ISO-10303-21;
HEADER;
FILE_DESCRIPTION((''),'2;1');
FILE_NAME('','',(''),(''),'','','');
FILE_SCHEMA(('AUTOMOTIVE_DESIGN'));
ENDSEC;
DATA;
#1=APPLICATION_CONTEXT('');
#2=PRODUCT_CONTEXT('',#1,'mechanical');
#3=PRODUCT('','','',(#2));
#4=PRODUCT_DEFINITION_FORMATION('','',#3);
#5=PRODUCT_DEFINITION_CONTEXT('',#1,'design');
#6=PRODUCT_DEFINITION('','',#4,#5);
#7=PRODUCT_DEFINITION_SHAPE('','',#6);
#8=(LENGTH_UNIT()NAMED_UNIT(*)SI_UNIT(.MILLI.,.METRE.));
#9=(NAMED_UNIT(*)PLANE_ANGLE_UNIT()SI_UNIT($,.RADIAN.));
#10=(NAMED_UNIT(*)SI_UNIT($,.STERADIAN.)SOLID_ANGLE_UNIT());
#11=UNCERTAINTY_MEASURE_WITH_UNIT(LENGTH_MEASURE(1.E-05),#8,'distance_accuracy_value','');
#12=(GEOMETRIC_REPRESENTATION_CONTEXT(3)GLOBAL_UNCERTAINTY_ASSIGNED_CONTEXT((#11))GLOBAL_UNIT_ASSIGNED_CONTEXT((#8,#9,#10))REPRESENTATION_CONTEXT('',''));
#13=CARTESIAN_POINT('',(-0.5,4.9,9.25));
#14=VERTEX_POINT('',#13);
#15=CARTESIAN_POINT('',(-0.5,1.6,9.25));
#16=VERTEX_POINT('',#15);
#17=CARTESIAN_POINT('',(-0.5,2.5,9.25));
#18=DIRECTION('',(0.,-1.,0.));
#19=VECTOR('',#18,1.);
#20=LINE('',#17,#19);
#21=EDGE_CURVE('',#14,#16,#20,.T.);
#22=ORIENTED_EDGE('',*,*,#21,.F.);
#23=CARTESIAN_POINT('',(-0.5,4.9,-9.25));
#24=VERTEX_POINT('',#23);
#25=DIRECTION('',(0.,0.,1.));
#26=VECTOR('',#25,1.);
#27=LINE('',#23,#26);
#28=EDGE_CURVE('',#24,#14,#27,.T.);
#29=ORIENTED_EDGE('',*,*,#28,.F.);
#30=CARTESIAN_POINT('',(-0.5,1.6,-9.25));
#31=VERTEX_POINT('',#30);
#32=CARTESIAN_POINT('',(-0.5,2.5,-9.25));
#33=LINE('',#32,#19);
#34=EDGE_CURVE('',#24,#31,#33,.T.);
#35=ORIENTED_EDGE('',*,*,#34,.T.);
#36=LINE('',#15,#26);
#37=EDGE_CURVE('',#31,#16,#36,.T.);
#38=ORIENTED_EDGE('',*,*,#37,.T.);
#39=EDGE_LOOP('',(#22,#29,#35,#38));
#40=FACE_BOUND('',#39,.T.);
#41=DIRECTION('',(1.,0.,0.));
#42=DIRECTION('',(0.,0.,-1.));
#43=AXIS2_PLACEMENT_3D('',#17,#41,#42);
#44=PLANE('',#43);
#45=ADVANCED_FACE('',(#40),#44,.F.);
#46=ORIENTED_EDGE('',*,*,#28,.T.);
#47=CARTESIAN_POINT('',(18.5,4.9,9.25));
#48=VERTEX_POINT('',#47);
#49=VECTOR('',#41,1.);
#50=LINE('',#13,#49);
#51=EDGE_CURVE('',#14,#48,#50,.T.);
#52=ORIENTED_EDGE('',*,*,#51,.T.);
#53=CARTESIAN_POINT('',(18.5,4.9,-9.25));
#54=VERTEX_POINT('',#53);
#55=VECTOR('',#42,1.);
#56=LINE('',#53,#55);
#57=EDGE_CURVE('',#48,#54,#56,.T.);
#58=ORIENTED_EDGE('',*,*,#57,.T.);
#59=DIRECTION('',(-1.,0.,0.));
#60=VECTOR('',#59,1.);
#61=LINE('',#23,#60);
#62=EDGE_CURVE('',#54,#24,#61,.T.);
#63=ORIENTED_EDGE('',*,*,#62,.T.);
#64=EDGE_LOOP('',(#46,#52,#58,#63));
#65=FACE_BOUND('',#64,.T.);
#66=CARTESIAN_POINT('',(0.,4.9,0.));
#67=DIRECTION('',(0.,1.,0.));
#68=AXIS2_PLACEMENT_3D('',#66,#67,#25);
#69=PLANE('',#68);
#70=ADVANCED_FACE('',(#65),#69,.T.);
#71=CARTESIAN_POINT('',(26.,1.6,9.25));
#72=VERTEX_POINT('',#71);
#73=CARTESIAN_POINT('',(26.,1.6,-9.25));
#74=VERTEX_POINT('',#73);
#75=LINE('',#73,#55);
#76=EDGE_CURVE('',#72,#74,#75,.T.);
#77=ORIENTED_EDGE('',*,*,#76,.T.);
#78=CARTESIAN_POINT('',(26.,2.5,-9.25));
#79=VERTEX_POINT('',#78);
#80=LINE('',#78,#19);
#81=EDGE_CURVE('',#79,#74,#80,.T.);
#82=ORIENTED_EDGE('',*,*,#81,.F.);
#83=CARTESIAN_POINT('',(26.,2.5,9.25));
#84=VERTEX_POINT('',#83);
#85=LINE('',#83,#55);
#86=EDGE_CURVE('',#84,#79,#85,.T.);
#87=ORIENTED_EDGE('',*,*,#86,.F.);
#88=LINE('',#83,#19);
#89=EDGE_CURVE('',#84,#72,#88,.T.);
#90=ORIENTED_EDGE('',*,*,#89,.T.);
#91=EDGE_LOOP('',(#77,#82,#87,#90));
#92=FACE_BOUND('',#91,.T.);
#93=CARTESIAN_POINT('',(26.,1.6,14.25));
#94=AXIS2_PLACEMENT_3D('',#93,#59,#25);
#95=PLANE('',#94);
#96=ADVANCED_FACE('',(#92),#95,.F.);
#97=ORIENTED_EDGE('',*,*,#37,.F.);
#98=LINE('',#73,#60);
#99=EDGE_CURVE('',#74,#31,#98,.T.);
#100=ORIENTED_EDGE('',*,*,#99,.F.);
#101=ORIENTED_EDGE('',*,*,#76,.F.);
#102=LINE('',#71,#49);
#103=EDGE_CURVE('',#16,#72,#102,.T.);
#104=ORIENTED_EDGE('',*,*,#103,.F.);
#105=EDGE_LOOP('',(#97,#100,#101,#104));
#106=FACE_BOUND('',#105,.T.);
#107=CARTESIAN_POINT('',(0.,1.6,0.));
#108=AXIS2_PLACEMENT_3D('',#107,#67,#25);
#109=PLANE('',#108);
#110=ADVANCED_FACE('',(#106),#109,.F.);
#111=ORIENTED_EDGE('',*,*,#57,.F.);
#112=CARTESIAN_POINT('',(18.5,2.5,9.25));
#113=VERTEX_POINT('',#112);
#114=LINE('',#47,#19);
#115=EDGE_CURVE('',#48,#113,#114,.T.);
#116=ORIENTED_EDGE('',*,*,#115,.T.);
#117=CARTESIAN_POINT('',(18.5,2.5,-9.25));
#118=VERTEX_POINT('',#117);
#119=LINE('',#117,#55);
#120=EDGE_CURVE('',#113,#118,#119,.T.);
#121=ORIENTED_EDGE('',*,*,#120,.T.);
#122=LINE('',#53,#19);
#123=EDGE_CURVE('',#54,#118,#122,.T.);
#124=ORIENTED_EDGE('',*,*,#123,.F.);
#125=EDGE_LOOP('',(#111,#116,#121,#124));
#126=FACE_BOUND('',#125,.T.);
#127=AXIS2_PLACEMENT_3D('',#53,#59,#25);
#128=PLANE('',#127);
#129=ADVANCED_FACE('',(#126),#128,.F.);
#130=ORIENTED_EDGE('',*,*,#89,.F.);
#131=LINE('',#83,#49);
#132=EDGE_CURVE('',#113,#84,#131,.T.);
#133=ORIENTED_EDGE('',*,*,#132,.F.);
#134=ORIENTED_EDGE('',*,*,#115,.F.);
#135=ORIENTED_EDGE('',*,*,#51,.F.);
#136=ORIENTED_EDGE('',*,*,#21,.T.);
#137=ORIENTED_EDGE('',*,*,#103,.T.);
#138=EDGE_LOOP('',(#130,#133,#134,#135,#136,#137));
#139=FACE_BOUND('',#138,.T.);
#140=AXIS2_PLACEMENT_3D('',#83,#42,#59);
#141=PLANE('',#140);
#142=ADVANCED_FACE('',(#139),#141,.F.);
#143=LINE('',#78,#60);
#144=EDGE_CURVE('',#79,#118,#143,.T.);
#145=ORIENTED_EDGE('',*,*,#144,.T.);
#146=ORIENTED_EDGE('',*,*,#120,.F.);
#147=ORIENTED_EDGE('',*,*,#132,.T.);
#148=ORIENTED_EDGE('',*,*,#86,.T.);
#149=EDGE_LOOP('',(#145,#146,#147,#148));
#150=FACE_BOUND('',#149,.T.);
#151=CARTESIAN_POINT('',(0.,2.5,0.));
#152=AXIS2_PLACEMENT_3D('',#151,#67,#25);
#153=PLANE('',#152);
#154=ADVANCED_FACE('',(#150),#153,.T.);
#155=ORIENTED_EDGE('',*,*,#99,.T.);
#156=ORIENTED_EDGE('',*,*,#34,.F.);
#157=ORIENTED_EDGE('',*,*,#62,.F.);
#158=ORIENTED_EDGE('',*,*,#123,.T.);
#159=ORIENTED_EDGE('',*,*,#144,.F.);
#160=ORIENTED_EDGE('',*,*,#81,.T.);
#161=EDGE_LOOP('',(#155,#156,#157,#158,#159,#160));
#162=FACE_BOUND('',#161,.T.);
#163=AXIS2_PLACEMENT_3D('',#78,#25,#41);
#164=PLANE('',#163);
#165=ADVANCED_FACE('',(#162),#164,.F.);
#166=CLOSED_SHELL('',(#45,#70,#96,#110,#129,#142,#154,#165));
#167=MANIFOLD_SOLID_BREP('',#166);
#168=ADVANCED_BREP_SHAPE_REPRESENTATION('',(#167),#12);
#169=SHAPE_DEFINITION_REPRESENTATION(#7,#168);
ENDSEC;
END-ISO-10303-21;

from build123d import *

# Parameters (mm, degrees)
SKETCH1_W                  = 52
SKETCH1_H                  = 28.5
SKETCH1_R                  = 1.6
BOSS_EXTRUDE1_DEPTH        = 1.6
FILLET1_R                  = 2
SKETCH2_W                  = 6
SKETCH2_H                  = 8
BOSS_EXTRUDE2_DEPTH        = 2.6
SKETCH3_W                  = 26.5
SKETCH3_H                  = 18.5
BOSS_EXTRUDE3_DEPTH        = 0.9
SKETCH4_W                  = 19
SKETCH4_H                  = 18.5
BOSS_EXTRUDE4_DEPTH        = 2.4
SKETCH5_W                  = 4.480247742
SKETCH5_H                  = 2.767211841
SKETCH5_H_2                = 2.398250262
BOSS_EXTRUDE5_DEPTH        = 2
CUT_EXTRUDE1_START         = -1.6
CUT_EXTRUDE1_OUTLINE_R     = 1.6
CUT_EXTRUDE1_DEPTH         = 1.6
CUT_EXTRUDE1_2_OUTLINE_W   = 6
CUT_EXTRUDE1_2_OUTLINE_H   = 8
CUT_EXTRUDE1_2_OUTLINE_W_2 = 4.480247742
CUT_EXTRUDE1_2_OUTLINE_H_2 = 2.767211841
CUT_EXTRUDE1_2_OUTLINE_H_3 = 2.398250262
CUT_EXTRUDE1_2_DEPTH       = 2.6


# Read off the part's stored shape, not the designer's step: Cut-Extrude1
with BuildPart() as part:
    # Sketch1 → Boss-Extrude1 (new body)
    with BuildSketch(Plane(origin=(0, 0, 0), x_dir=(1, 0, 0), z_dir=(0, 1, 0))):
        Rectangle(SKETCH1_W, SKETCH1_H)
        with Locations(Location((-23.7, 11.55, 0), (0, 0, 270))):
            Circle(SKETCH1_R, mode=Mode.SUBTRACT)
        with Locations(Location((-23.7, -11.55, 0), (0, 0, 270))):
            Circle(SKETCH1_R, mode=Mode.SUBTRACT)
        with Locations(Location((23.4, 11.55, 0), (0, 0, 270))):
            Circle(SKETCH1_R, mode=Mode.SUBTRACT)
        with Locations(Location((23.4, -11.55, 0), (0, 0, 270))):
            Circle(SKETCH1_R, mode=Mode.SUBTRACT)
    extrude(amount=BOSS_EXTRUDE1_DEPTH)

    # Fillet1
    fillet1_edges = [part.edges().sort_by_distance(p)[0] for p in [
        (-26, 0.8, -14.25),
        (26, 0.8, -14.25),
        (26, 0.8, 14.25),
        (-26, 0.8, 14.25),
    ]]
    fillet(fillet1_edges, radius=FILLET1_R)

    # Sketch2 → Boss-Extrude2 (add)
    with BuildSketch(Plane(origin=(0, 1.6, 0), x_dir=(1, 0, 0), z_dir=(0, 1, 0))):
        with Locations((-23, 0)):
            Rectangle(SKETCH2_W, SKETCH2_H)
    extrude(amount=BOSS_EXTRUDE2_DEPTH)

    # Sketch3 → Boss-Extrude3 (add)
    with BuildSketch(Plane(origin=(0, 1.6, 0), x_dir=(1, 0, 0), z_dir=(0, 1, 0))):
        with Locations((12.75, 0)):
            Rectangle(SKETCH3_W, SKETCH3_H)
    extrude(amount=BOSS_EXTRUDE3_DEPTH)

    # Sketch4 → Boss-Extrude4 (add)
    with BuildSketch(Plane(origin=(0, 2.5, 0), x_dir=(1, 0, 0), z_dir=(0, 1, 0))):
        with Locations((9, 0)):
            Rectangle(SKETCH4_W, SKETCH4_H)
    extrude(amount=BOSS_EXTRUDE4_DEPTH)

    # Sketch5 → Boss-Extrude5 (add)
    with BuildSketch(Plane(origin=(0, 1.6, 0), x_dir=(1, 0, 0), z_dir=(0, 1, 0))):
        with Locations((-23.323642657, 8.222572326)):
            Rectangle(SKETCH5_W, SKETCH5_H)
        with Locations((-23.323642657, -8.459761913)):
            Rectangle(SKETCH5_W, SKETCH5_H_2)
    extrude(amount=BOSS_EXTRUDE5_DEPTH)

    # Cut-Extrude1 outline → Cut-Extrude1 (cut)
    with BuildSketch(Plane(origin=(0, 1.6, 0), x_dir=(1, 0, 0), z_dir=(0, 1, 0)).offset(CUT_EXTRUDE1_START)):
        with BuildLine():
            ThreePointArc((-26, -12.25), (-25.414213562, -13.664213562), (-24, -14.25))
            Line((-24, -14.25), (24, -14.25))
            ThreePointArc((24, -14.25), (25.414213562, -13.664213562), (26, -12.25))
            Line((26, -12.25), (26, 12.25))
            ThreePointArc((26, 12.25), (25.414213562, 13.664213562), (24, 14.25))
            Line((24, 14.25), (-24, 14.25))
            ThreePointArc((-24, 14.25), (-25.414213562, 13.664213562), (-26, 12.25))
            Line((-26, 12.25), (-26, -12.25))
        make_face()
        with Locations((-23.7, -11.55)):
            Circle(CUT_EXTRUDE1_OUTLINE_R, mode=Mode.SUBTRACT)
        with Locations((23.4, -11.55)):
            Circle(CUT_EXTRUDE1_OUTLINE_R, mode=Mode.SUBTRACT)
        with Locations((-23.7, 11.55)):
            Circle(CUT_EXTRUDE1_OUTLINE_R, mode=Mode.SUBTRACT)
        with Locations((23.4, 11.55)):
            Circle(CUT_EXTRUDE1_OUTLINE_R, mode=Mode.SUBTRACT)
    extrude(amount=CUT_EXTRUDE1_DEPTH, mode=Mode.SUBTRACT)

    # Cut-Extrude1 2 outline → Cut-Extrude1 2 (cut)
    with BuildSketch(Plane(origin=(0, 1.6, 0), x_dir=(1, 0, 0), z_dir=(0, 1, 0))):
        with Locations((-23, 0)):
            Rectangle(CUT_EXTRUDE1_2_OUTLINE_W, CUT_EXTRUDE1_2_OUTLINE_H)
        with Locations((-23.323642657, 8.222572326)):
            Rectangle(CUT_EXTRUDE1_2_OUTLINE_W_2, CUT_EXTRUDE1_2_OUTLINE_H_2)
        with Locations((-23.323642657, -8.459761913)):
            Rectangle(CUT_EXTRUDE1_2_OUTLINE_W_2, CUT_EXTRUDE1_2_OUTLINE_H_3)
    extrude(amount=CUT_EXTRUDE1_2_DEPTH, mode=Mode.SUBTRACT)


solid = part.part
